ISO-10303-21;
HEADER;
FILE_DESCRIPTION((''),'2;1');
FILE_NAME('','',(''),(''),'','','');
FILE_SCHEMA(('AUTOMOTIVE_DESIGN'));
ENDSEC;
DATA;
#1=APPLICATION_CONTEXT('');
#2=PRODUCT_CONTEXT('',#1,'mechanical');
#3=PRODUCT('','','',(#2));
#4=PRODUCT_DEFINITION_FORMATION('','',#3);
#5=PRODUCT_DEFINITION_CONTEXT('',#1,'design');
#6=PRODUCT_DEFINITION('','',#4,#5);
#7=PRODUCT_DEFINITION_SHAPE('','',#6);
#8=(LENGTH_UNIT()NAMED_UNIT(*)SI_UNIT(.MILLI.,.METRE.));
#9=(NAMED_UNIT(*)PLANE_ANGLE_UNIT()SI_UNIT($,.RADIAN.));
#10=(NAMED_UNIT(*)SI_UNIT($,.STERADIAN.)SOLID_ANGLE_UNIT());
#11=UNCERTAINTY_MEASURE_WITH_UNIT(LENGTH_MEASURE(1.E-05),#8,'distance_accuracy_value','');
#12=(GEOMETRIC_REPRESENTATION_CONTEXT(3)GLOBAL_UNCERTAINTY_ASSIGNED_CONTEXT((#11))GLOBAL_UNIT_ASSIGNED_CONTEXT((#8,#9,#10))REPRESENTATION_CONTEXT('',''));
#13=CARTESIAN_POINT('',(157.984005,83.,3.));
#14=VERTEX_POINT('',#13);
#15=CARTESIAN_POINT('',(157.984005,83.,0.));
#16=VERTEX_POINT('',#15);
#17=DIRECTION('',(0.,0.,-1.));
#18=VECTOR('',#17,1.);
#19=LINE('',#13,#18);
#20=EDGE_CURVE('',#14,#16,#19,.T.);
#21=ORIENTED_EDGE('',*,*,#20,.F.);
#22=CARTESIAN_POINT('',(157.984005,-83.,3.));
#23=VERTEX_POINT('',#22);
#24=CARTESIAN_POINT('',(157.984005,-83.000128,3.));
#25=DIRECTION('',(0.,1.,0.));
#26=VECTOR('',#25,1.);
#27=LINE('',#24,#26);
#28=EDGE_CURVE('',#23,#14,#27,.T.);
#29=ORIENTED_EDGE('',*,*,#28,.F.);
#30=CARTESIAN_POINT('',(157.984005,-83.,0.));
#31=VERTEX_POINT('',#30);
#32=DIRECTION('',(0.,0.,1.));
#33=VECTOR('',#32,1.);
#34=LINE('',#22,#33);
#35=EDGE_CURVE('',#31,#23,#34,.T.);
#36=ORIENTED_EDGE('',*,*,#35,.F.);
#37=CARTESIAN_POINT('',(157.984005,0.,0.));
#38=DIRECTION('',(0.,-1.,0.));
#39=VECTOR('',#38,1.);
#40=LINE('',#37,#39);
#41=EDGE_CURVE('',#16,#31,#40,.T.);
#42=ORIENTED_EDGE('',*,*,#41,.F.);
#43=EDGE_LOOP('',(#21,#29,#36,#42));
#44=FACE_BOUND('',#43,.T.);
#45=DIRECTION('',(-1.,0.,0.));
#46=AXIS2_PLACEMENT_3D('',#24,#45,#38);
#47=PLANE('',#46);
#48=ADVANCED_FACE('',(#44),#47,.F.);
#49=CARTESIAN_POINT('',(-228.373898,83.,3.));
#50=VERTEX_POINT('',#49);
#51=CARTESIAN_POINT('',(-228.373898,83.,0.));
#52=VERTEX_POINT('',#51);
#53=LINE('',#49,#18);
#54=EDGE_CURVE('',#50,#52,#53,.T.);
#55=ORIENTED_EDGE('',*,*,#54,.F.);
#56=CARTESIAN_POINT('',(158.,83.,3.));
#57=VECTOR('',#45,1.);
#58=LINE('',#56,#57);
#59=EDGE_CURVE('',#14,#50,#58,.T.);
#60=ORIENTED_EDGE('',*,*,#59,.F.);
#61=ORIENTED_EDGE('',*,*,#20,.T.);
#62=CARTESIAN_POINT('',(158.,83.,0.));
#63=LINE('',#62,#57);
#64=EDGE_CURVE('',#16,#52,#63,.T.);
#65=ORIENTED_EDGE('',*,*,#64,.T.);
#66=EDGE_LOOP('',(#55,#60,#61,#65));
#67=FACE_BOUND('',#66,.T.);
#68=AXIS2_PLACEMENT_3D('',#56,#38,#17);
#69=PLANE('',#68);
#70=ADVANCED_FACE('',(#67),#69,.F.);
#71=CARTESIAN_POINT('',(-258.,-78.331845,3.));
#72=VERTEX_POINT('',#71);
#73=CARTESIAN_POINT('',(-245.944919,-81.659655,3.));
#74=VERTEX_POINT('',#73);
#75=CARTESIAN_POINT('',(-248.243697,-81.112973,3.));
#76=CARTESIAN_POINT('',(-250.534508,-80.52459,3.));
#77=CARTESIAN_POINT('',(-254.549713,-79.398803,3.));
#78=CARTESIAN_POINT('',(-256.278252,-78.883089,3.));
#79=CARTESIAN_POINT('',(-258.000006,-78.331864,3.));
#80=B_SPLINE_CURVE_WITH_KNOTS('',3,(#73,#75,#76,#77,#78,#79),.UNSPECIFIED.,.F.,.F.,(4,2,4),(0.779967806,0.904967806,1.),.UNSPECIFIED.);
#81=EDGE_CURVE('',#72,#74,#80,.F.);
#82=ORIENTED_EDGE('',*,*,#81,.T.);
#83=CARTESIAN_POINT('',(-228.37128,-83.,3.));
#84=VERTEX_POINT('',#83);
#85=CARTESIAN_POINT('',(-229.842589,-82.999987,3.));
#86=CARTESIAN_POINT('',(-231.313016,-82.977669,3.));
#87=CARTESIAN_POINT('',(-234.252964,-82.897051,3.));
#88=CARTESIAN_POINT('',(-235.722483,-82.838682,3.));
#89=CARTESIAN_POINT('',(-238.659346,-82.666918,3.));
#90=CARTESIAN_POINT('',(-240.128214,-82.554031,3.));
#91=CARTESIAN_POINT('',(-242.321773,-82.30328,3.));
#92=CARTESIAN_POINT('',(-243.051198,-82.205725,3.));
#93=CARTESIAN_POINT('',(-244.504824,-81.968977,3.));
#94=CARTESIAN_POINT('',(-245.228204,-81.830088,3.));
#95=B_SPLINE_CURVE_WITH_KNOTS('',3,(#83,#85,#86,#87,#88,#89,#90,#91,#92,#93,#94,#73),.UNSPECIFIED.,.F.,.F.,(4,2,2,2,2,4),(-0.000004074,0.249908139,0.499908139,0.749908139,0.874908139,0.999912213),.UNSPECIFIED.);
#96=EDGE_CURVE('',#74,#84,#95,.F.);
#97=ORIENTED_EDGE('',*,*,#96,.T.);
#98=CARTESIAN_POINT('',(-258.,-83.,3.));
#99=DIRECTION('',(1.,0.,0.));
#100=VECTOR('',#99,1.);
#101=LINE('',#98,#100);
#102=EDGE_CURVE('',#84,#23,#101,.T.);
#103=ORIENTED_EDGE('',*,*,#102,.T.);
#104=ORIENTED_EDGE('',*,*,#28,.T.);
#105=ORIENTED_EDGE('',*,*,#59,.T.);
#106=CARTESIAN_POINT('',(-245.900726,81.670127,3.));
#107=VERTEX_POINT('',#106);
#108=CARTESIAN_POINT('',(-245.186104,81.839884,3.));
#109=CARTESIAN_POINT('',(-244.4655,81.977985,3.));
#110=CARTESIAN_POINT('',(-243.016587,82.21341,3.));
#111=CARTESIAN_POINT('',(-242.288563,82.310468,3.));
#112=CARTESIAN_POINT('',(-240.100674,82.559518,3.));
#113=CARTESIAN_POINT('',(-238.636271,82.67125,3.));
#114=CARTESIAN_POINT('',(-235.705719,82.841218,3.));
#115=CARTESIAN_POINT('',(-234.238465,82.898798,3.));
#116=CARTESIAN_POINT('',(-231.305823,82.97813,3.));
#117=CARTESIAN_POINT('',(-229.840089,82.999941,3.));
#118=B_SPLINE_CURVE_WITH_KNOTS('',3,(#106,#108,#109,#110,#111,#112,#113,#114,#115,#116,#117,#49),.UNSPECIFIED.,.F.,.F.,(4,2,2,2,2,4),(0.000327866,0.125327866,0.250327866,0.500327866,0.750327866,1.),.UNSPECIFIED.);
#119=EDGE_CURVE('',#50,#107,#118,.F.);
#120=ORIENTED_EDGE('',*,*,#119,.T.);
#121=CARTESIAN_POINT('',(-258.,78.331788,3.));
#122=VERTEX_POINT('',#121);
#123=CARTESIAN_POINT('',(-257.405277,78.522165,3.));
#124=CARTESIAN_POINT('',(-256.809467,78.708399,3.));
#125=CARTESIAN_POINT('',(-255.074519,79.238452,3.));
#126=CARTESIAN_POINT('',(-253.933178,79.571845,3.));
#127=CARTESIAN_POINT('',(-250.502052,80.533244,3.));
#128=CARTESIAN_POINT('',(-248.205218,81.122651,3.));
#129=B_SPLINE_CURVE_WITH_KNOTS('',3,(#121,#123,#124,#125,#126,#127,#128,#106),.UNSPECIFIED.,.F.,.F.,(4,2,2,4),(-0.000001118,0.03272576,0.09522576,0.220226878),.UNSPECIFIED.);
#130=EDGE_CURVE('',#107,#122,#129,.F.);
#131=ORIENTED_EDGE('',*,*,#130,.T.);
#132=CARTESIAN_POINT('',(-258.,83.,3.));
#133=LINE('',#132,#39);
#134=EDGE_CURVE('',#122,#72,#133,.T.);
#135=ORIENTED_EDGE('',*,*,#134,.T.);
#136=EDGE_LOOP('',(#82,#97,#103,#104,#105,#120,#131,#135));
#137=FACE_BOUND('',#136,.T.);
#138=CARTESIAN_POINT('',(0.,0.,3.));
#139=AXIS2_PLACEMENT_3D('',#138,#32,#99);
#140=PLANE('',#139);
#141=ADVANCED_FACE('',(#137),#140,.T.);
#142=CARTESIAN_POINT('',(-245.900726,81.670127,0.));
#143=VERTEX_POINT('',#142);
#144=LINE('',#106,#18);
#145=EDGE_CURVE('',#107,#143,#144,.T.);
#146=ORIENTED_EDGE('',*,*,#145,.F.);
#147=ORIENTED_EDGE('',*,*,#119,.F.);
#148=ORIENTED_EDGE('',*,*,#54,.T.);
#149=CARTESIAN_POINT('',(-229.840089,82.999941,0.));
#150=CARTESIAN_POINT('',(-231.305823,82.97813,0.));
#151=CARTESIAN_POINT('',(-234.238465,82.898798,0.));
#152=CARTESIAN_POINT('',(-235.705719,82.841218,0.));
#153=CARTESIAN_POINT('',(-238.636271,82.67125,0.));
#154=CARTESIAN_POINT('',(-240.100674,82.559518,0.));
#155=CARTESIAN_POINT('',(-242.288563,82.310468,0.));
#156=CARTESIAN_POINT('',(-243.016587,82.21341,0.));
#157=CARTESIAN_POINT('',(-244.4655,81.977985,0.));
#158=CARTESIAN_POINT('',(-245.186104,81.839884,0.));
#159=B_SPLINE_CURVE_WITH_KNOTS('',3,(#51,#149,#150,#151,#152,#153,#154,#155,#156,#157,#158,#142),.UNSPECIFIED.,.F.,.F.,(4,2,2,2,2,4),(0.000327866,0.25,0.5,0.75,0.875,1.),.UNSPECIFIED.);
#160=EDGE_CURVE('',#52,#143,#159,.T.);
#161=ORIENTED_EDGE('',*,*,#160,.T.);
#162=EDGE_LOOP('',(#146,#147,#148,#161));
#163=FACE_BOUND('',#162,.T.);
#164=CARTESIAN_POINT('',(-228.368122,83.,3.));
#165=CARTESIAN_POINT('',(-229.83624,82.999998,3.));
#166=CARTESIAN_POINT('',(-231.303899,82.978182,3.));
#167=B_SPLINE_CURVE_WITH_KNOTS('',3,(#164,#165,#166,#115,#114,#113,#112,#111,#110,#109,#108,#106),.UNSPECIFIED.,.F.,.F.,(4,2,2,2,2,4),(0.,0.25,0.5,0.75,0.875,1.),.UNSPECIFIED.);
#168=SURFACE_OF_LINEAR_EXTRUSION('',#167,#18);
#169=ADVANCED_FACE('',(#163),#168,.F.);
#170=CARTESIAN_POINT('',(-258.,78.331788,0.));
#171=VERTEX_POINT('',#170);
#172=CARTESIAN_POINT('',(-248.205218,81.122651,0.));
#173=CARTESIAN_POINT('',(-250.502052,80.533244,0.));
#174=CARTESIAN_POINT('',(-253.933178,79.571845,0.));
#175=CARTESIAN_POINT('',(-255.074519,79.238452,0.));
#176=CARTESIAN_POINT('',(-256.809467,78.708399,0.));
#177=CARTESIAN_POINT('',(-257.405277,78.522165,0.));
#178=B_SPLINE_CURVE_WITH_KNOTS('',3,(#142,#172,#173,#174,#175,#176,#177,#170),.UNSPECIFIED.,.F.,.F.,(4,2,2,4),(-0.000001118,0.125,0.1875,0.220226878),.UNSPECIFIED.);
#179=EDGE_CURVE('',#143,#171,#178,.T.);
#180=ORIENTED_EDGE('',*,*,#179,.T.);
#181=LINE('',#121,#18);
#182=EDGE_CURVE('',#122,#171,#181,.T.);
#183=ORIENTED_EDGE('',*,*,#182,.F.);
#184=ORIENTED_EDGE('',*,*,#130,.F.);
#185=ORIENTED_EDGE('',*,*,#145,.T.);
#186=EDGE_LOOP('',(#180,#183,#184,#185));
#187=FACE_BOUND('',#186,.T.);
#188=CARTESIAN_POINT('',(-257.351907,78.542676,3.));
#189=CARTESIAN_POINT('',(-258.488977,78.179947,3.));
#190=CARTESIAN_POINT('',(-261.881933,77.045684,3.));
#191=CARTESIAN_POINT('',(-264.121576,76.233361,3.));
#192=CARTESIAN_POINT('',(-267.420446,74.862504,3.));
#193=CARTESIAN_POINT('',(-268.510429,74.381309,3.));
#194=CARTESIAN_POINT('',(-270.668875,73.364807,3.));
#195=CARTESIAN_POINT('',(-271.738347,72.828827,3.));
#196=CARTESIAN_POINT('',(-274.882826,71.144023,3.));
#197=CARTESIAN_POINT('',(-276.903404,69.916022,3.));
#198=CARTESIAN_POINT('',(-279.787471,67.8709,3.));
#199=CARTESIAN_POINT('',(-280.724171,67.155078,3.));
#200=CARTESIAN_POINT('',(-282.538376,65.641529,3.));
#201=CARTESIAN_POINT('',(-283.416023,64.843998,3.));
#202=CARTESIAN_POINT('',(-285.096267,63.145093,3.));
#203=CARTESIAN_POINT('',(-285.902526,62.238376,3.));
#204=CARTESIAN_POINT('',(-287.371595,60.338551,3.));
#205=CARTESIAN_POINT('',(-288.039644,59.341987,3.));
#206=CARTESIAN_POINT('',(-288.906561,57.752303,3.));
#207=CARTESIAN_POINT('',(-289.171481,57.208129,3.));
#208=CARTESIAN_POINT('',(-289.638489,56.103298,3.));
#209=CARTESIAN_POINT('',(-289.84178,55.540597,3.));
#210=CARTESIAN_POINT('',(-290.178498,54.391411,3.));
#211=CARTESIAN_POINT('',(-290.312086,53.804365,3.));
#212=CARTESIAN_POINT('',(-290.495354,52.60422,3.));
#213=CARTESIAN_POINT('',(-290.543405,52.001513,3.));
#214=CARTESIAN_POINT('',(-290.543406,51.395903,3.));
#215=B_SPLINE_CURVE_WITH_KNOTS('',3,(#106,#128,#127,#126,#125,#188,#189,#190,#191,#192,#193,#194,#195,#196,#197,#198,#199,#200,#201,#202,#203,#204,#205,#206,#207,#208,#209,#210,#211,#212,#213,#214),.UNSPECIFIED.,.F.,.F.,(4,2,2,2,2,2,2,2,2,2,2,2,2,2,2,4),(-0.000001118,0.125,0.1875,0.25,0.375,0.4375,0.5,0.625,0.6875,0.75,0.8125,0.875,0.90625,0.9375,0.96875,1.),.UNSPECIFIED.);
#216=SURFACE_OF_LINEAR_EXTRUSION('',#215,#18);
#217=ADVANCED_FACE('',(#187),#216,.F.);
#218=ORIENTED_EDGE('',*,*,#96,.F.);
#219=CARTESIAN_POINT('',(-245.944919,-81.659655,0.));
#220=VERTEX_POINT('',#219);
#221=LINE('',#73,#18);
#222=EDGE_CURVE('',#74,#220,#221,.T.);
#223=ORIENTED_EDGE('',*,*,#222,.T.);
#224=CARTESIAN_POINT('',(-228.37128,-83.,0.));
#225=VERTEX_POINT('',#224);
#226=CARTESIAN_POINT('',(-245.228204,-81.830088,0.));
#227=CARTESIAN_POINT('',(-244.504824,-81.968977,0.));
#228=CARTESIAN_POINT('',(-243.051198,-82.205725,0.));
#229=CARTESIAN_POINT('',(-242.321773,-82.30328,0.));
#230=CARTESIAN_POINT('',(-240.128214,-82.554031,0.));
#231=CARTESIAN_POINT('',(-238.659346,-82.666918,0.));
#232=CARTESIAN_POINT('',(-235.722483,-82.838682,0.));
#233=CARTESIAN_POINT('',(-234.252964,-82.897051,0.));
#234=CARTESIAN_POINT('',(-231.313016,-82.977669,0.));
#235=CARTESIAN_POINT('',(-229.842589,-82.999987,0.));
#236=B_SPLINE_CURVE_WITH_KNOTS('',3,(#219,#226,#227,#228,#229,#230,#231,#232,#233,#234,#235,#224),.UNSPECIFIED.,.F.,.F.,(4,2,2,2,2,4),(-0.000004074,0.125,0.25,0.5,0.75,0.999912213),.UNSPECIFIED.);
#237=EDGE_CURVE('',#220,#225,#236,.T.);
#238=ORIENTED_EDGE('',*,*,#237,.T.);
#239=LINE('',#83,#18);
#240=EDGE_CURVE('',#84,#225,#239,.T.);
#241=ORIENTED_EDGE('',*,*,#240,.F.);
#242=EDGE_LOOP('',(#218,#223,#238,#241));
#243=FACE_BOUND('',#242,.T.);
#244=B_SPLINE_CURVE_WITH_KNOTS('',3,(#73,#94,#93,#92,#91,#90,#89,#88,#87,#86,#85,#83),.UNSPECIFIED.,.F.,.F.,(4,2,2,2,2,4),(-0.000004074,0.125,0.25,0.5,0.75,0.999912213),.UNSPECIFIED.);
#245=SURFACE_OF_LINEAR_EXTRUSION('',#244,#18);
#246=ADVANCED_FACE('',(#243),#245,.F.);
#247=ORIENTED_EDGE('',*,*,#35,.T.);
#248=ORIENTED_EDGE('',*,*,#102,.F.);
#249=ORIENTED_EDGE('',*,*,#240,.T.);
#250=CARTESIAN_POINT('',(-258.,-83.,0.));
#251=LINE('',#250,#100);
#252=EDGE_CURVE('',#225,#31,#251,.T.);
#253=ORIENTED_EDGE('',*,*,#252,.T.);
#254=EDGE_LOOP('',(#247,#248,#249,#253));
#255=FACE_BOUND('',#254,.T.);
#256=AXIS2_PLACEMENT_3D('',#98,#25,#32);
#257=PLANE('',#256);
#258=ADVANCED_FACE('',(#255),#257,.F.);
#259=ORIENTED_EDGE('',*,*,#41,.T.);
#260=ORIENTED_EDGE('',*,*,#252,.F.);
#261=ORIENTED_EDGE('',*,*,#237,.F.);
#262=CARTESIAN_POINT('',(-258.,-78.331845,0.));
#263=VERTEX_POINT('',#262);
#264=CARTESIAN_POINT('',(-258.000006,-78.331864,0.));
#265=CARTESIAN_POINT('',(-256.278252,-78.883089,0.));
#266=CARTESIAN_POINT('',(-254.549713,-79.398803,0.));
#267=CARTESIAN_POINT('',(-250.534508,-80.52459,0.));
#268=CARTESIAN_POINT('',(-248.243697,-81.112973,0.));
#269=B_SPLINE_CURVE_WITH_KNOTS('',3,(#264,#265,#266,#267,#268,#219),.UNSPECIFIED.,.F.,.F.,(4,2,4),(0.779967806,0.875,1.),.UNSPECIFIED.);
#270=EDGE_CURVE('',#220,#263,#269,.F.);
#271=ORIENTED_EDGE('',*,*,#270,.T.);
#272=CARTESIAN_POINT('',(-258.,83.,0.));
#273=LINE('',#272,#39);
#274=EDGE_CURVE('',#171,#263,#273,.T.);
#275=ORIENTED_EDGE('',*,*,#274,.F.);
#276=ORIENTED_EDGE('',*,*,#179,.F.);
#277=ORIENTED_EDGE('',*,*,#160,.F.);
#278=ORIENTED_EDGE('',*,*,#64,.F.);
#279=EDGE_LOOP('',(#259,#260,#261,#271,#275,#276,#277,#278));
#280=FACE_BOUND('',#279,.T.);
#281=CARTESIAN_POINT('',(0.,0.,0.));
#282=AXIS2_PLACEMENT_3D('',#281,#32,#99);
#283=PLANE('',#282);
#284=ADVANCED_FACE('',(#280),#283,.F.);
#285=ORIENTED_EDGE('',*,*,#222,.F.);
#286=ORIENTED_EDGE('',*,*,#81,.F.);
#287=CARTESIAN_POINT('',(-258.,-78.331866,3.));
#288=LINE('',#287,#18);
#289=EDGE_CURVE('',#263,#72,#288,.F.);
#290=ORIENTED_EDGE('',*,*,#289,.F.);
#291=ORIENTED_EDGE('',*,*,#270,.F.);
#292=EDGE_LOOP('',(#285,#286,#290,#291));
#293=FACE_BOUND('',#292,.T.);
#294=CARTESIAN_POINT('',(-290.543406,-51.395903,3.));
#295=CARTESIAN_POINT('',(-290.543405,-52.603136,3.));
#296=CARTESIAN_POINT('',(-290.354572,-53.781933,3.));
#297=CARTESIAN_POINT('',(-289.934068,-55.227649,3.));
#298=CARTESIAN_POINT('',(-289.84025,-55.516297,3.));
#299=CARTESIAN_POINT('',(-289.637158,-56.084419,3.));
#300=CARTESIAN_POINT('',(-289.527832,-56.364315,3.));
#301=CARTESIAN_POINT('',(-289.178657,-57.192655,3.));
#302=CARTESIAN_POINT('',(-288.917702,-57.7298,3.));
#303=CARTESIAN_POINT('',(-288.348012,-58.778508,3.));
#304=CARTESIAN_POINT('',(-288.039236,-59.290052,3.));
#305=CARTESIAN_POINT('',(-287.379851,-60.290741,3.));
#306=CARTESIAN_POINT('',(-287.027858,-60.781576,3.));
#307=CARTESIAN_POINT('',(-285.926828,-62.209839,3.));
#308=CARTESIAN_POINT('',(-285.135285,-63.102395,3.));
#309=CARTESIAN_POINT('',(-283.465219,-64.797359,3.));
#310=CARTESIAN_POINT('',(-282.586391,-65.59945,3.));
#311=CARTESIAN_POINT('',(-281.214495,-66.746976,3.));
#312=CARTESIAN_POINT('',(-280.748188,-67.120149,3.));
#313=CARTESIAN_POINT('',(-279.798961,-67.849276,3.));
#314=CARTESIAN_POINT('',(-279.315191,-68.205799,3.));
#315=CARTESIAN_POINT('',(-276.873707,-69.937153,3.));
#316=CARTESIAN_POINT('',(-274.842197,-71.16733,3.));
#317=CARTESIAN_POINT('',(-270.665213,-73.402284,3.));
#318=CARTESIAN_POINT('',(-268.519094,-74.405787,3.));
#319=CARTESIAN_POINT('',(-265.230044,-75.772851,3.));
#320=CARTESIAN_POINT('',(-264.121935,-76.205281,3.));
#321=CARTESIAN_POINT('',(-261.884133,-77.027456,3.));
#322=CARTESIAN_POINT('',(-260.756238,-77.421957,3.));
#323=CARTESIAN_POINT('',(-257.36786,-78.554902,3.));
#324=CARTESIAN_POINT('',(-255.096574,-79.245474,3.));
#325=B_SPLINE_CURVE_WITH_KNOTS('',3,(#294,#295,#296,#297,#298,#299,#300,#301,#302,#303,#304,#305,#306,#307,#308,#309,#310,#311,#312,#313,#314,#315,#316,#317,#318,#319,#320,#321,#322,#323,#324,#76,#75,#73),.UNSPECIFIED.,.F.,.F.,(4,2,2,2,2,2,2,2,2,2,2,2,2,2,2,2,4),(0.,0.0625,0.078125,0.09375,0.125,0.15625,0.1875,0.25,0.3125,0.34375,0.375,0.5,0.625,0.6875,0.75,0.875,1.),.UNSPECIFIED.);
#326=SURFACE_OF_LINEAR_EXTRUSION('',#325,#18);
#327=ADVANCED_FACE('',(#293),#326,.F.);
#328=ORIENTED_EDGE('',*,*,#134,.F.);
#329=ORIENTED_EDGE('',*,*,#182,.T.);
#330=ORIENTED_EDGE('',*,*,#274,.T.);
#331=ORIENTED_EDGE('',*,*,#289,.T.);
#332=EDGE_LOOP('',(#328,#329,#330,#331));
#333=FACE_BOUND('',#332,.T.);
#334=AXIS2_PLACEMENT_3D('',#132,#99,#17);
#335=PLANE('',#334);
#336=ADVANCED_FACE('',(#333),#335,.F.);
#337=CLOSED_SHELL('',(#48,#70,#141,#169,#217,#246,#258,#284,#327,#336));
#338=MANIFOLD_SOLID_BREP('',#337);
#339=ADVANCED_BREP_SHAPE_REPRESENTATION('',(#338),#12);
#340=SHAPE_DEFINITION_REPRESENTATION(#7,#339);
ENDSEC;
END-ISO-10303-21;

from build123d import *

# Parameters (mm, degrees)
SKETCH1_W                   = 416
SKETCH1_H                   = 166
BOSS_EXTRUDE1_DEPTH         = 3
CUT_EXTRUDE_THIN3_OUTLINE_W = 0.015995157
CUT_EXTRUDE_THIN3_OUTLINE_H = 166
CUT_EXTRUDE_THIN3_DEPTH     = 3


# Read off the part's stored shape, not the designer's step: Cut-Extrude-Thin3
with BuildPart() as part:
    # Sketch1 → Boss-Extrude1 (new body)
    with BuildSketch(Plane.XY):
        with Locations((-50, 0)):
            Rectangle(SKETCH1_W, SKETCH1_H)
    extrude(amount=BOSS_EXTRUDE1_DEPTH)

    # Cut-Extrude-Thin3 outline → Cut-Extrude-Thin3 (cut)
    with BuildSketch(Plane.XY):
        with BuildLine():
            add(Edge.make_bspline(
                [(-245.900726071, 81.670126669), (-248.205217512, 81.122650851), (-250.502051759, 80.533244416), (-253.933177983, 79.571844696), (-255.074519046, 79.238452038), (-256.809467384, 78.708399189), (-257.40527654, 78.522165432), (-258, 78.331788106)],
                knots=[-1.118e-06, -1.118e-06, -1.118e-06, -1.118e-06, 0.125, 0.125, 0.1875, 0.1875, 0.220226879, 0.220226879, 0.220226879, 0.220226879], degree=3))
            add(Edge.make_bspline(
                [(-228.373898498, 82.999999879), (-229.840089175, 82.999940695), (-231.305822798, 82.978130365), (-234.23846503, 82.898798217), (-235.705718536, 82.841217903), (-238.636271152, 82.67124962), (-240.100674412, 82.559518263), (-242.288562974, 82.310467536), (-243.016587256, 82.213409792), (-244.465500098, 81.977984668), (-245.186104013, 81.839884091), (-245.900726071, 81.670126669)],
                knots=[0.000327866, 0.000327866, 0.000327866, 0.000327866, 0.25, 0.25, 0.5, 0.5, 0.75, 0.75, 0.875, 0.875, 1, 1, 1, 1], degree=3))
            Line((-228.373898498, 82.999999879), (-258, 83))
            Line((-258, 83), (-258, 78.331788106))
        make_face()
        with BuildLine():
            add(Edge.make_bspline(
                [(-258.00000599, -78.331863791), (-256.278252152, -78.883088593), (-254.549713484, -79.39880324), (-250.534508221, -80.524590275), (-248.243697449, -81.112973045), (-245.944918928, -81.659654554)],
                knots=[0.779967806, 0.779967806, 0.779967806, 0.779967806, 0.875, 0.875, 1, 1, 1, 1], degree=3))
            Line((-258.00000599, -78.331863791), (-258, -83))
            Line((-258, -83), (-228.371279881, -83))
            add(Edge.make_bspline(
                [(-245.944918928, -81.659654554), (-245.228204163, -81.83008772), (-244.504823749, -81.968976927), (-243.051197688, -82.205725268), (-242.321772562, -82.303279617), (-240.128214471, -82.554030513), (-238.659345658, -82.66691784), (-235.722483002, -82.838682109), (-234.252964152, -82.897051002), (-231.31301555, -82.977668647), (-229.842588562, -82.999987305), (-228.371279881, -83)],
                knots=[-4.074e-06, -4.074e-06, -4.074e-06, -4.074e-06, 0.125, 0.125, 0.25, 0.25, 0.5, 0.5, 0.75, 0.75, 0.999912213, 0.999912213, 0.999912213, 0.999912213], degree=3))
        make_face()
        with Locations((157.992002421, 0)):
            Rectangle(CUT_EXTRUDE_THIN3_OUTLINE_W, CUT_EXTRUDE_THIN3_OUTLINE_H)
    extrude(amount=CUT_EXTRUDE_THIN3_DEPTH, mode=Mode.SUBTRACT)


solid = part.part
